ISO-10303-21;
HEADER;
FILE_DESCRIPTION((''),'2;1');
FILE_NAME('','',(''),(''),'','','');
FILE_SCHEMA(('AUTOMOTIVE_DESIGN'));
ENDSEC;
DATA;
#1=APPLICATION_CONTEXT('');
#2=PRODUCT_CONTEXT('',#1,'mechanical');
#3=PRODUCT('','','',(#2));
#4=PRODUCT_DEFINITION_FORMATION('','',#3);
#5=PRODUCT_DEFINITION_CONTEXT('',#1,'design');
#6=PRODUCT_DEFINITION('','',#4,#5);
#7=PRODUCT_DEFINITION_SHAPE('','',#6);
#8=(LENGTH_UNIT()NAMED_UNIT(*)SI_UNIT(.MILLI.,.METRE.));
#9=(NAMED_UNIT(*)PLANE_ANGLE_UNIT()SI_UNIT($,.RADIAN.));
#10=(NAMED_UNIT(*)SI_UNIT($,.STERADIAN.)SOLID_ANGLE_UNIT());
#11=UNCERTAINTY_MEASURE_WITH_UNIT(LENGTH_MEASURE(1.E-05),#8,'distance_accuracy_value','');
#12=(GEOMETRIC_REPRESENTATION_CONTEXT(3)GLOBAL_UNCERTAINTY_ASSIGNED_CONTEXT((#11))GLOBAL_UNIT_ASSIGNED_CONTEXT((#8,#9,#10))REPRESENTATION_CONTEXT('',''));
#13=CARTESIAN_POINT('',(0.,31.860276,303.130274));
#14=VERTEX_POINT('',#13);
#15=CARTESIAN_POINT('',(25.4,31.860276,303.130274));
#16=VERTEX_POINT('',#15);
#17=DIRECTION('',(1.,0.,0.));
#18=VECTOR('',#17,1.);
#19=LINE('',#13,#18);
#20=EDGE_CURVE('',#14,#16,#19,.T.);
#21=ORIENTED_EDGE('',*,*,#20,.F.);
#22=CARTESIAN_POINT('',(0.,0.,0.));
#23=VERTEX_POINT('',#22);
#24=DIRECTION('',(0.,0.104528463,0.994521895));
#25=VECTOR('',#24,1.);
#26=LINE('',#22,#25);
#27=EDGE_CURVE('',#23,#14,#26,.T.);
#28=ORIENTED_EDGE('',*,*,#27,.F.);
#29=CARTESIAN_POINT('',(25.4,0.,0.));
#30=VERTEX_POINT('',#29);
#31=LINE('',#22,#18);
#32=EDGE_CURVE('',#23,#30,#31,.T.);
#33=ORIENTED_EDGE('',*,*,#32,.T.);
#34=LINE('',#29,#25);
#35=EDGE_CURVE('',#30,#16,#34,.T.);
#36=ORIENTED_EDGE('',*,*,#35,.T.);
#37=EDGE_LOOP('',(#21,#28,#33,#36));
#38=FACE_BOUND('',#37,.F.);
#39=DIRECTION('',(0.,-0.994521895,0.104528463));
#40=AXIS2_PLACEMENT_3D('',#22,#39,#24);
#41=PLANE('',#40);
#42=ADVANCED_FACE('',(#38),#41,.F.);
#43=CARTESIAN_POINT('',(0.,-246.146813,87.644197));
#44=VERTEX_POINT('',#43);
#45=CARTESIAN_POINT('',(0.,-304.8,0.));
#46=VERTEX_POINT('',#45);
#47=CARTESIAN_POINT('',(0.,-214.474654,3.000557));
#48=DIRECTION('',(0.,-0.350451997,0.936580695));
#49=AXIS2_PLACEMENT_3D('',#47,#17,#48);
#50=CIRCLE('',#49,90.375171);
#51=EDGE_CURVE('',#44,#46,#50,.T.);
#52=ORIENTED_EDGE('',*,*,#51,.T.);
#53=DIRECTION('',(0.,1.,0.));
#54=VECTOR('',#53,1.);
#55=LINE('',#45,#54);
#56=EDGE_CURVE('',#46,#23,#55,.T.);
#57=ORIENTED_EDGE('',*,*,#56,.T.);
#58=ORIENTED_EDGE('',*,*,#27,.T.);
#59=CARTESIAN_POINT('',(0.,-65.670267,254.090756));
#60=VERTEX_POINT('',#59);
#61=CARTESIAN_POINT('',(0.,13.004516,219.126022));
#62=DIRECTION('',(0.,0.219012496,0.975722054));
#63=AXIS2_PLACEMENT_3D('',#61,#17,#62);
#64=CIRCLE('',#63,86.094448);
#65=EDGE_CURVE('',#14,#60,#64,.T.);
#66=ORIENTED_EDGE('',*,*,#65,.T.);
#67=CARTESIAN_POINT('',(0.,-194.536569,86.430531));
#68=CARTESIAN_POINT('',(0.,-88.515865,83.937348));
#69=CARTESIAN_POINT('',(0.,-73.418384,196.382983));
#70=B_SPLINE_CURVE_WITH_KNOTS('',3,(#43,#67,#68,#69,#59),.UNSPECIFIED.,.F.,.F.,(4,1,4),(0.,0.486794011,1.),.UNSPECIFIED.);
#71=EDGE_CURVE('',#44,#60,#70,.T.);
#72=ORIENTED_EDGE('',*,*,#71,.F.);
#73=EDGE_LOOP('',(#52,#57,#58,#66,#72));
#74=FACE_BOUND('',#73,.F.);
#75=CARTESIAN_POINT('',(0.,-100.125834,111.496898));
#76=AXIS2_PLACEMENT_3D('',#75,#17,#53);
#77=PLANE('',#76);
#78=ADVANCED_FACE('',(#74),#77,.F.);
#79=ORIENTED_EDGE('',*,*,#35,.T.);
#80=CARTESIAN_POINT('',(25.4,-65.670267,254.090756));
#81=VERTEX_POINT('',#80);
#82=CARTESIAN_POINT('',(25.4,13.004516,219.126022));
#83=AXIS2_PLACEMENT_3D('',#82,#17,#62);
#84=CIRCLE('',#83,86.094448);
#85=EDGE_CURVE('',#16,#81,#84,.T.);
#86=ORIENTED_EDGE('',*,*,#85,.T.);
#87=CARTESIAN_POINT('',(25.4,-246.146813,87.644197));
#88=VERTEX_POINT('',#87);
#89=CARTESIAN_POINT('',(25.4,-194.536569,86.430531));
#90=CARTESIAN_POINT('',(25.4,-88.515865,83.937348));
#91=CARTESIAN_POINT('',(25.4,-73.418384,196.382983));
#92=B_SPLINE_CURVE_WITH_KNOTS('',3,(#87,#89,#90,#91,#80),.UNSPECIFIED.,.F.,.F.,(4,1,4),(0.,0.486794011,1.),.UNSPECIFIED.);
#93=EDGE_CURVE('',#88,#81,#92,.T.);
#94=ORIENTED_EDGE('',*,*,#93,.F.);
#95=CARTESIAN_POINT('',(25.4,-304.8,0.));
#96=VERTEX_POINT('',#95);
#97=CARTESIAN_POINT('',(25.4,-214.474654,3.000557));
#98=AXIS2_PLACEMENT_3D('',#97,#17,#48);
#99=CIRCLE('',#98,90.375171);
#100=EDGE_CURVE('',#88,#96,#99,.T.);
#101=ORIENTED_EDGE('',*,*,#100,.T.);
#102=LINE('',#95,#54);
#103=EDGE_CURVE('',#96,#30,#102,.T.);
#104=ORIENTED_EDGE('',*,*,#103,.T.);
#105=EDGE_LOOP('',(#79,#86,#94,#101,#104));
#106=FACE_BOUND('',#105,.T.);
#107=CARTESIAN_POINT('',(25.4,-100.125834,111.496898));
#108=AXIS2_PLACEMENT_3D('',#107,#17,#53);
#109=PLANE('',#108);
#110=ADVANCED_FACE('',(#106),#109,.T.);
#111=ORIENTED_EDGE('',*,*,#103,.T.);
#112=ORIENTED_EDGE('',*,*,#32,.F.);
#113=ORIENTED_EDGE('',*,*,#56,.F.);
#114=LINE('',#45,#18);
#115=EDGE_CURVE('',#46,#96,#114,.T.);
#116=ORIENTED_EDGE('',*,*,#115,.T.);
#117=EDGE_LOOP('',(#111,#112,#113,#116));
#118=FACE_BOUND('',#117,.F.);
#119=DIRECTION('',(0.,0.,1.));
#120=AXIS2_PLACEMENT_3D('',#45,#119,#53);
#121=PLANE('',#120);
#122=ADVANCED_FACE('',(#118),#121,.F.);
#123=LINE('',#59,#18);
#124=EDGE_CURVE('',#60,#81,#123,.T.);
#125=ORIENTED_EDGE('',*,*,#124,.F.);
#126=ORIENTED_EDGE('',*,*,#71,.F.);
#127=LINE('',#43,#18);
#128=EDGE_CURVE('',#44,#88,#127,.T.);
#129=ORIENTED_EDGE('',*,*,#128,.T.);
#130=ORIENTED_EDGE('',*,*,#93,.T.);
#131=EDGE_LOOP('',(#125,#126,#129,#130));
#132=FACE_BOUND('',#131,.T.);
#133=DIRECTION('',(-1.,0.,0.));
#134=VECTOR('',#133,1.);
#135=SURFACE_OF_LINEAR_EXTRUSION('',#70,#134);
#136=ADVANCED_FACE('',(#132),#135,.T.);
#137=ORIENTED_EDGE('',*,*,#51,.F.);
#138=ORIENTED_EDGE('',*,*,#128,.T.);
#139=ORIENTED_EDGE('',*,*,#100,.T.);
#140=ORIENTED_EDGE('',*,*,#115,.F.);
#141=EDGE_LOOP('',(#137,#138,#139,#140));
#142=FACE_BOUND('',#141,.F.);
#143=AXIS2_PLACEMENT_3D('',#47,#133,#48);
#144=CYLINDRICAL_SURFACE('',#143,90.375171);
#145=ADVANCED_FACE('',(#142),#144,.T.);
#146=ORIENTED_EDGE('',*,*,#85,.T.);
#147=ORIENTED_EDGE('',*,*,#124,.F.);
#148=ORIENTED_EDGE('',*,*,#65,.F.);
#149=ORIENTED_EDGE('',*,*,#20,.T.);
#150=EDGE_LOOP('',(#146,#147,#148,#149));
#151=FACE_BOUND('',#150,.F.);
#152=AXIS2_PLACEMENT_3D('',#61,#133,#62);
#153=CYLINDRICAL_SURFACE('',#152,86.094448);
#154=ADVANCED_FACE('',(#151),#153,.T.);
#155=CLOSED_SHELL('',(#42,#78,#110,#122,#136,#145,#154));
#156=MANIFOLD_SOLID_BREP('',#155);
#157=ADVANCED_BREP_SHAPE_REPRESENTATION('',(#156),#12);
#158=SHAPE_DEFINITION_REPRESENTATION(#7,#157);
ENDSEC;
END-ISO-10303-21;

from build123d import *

# Parameters (mm, degrees)
F1_DEPTH = 25.4


with BuildPart() as f1:
    # F0 (on Right) → F1 (new body)
    with BuildSketch(Plane.YZ):
        with BuildLine():
            Line((-304.8, 0), (0, 0))
            Line((0, 0), (31.860275604, 303.1302737082))
            ThreePointArc((31.860275604, 303.1302737082), (-25.6710248369, 296.0445279913), (-65.6702667475, 254.0907561779))
            add(Edge.make_bspline(
                [(-246.146813035, 87.6441970468), (-194.5365692681, 86.4305306387), (-88.5158652272, 83.9373479358), (-73.4183843518, 196.3829828835), (-65.6702667475, 254.0907561779)],
                knots=[0, 0, 0, 0, 0.486794011, 1, 1, 1, 1], degree=3))
            ThreePointArc((-246.146813035, 87.6441970468), (-289.5827369697, 53.2643345738), (-304.8, 0))
        make_face()
    extrude(amount=F1_DEPTH)


solid = f1.part
